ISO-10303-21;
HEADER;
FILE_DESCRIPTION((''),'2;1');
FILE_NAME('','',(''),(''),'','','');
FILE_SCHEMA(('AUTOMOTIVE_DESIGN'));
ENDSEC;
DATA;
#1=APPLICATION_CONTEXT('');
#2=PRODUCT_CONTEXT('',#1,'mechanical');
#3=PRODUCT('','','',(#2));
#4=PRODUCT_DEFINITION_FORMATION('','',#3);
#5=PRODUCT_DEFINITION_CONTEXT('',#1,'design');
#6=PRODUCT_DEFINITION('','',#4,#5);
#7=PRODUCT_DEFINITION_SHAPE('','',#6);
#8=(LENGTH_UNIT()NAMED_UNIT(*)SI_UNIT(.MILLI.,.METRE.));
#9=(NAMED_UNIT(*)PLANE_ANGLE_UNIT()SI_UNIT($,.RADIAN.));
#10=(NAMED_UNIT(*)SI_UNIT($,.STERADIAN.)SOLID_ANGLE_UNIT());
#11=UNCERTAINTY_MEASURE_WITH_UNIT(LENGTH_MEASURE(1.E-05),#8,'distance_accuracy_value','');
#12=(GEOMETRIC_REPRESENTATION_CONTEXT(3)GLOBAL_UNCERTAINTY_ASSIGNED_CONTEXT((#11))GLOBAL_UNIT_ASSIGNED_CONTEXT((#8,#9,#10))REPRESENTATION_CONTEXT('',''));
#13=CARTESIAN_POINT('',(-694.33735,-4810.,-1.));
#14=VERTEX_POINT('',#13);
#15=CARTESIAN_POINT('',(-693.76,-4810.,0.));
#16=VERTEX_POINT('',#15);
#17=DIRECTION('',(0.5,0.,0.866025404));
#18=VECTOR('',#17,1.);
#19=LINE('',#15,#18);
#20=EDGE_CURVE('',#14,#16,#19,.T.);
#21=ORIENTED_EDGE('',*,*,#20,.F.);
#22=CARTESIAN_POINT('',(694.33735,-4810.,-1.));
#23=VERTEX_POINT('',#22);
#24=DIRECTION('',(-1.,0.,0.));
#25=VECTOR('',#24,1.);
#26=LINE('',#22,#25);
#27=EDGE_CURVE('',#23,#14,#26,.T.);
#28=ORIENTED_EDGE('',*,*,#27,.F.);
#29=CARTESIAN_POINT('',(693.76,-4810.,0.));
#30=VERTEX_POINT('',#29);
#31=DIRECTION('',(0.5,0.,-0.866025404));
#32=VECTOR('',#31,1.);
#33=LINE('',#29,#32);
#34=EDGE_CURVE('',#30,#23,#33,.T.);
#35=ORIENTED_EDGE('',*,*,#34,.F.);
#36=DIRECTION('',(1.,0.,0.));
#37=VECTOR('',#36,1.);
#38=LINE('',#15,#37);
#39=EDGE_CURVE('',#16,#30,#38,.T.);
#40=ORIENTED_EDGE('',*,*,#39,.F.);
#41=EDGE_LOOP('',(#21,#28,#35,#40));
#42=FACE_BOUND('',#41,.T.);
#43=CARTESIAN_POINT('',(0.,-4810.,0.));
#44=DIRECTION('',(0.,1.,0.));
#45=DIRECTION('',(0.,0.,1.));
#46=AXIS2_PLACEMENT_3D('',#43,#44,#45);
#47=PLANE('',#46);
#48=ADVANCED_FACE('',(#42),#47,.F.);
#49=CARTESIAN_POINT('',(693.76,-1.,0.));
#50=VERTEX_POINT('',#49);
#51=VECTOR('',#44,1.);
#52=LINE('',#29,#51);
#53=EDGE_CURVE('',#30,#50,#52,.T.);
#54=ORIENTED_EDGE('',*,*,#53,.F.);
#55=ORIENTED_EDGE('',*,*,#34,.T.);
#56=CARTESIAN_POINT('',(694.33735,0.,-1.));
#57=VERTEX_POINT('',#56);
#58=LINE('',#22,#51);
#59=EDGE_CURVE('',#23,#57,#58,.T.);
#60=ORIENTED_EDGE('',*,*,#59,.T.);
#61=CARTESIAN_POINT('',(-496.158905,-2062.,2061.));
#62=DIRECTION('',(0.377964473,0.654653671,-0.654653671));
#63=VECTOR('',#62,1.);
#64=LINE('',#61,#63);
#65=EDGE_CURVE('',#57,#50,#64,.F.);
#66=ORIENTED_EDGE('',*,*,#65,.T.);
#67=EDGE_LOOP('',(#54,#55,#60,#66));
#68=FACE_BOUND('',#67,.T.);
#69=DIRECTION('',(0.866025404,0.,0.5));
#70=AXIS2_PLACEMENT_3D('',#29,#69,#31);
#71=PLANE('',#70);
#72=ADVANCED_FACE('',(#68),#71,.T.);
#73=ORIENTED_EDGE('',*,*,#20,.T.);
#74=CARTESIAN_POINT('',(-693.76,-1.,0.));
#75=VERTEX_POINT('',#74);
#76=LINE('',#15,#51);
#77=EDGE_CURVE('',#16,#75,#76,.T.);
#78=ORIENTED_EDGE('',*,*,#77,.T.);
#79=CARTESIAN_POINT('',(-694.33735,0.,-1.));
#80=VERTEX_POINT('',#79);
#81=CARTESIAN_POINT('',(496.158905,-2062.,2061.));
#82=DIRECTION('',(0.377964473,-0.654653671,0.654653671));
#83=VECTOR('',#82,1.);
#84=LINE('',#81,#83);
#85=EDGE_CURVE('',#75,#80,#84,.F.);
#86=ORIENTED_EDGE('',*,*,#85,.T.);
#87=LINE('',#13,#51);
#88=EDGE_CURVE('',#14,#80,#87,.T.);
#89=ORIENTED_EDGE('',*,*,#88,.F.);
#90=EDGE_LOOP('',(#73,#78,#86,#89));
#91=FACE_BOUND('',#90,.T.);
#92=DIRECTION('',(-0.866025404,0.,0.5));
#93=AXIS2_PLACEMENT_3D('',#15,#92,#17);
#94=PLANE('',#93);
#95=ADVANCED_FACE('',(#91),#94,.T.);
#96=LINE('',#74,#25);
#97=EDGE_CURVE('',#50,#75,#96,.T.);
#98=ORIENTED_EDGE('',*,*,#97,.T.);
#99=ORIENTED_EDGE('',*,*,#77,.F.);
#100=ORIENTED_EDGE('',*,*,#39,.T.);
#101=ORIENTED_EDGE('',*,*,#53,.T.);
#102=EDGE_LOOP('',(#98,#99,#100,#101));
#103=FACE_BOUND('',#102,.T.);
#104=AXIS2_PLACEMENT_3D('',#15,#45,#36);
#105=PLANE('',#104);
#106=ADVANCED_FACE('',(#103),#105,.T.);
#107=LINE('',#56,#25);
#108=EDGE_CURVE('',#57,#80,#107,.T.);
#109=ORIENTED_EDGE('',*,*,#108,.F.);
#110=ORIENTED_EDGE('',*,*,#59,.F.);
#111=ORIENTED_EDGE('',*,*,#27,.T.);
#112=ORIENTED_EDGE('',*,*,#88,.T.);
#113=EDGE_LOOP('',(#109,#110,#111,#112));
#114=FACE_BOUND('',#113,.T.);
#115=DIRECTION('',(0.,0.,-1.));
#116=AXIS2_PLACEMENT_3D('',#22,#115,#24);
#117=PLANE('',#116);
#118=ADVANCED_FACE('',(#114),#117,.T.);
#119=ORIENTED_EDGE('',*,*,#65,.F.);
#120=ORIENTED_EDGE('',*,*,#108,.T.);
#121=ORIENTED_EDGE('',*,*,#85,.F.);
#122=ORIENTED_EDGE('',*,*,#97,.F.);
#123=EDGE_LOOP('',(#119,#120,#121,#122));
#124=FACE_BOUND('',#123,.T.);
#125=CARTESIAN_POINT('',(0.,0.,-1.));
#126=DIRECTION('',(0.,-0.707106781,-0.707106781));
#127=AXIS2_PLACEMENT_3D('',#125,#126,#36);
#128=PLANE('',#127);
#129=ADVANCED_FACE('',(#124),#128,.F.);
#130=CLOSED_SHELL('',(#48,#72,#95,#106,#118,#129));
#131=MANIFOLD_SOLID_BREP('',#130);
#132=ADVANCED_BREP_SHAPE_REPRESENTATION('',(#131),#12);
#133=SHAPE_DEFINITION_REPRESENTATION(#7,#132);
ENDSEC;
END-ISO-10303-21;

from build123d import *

# Parameters (mm, degrees)
BOSS_EXTRUDE1_DEPTH = 4810
CHAMFER1_SIZE       = 1


with BuildPart() as part:
    # Sketch3 → Boss-Extrude1 (new body)
    with BuildSketch(Plane(origin=(0, 0, 0), x_dir=(1, 0, 0), z_dir=(0, 1, 0))):
        Polygon((-693.76, 0), (693.76, 0), (694.337350269, 1), (-694.337350269, 1), align=None)
    extrude(amount=-BOSS_EXTRUDE1_DEPTH)

    # Chamfer1
    chamfer1_edges = [part.edges().sort_by_distance(p)[0] for p in [
        (0, 0, 0),
    ]]
    chamfer(chamfer1_edges, length=CHAMFER1_SIZE - 0.0001)  # a hair under: the kernel refuses the full size


solid = part.part
